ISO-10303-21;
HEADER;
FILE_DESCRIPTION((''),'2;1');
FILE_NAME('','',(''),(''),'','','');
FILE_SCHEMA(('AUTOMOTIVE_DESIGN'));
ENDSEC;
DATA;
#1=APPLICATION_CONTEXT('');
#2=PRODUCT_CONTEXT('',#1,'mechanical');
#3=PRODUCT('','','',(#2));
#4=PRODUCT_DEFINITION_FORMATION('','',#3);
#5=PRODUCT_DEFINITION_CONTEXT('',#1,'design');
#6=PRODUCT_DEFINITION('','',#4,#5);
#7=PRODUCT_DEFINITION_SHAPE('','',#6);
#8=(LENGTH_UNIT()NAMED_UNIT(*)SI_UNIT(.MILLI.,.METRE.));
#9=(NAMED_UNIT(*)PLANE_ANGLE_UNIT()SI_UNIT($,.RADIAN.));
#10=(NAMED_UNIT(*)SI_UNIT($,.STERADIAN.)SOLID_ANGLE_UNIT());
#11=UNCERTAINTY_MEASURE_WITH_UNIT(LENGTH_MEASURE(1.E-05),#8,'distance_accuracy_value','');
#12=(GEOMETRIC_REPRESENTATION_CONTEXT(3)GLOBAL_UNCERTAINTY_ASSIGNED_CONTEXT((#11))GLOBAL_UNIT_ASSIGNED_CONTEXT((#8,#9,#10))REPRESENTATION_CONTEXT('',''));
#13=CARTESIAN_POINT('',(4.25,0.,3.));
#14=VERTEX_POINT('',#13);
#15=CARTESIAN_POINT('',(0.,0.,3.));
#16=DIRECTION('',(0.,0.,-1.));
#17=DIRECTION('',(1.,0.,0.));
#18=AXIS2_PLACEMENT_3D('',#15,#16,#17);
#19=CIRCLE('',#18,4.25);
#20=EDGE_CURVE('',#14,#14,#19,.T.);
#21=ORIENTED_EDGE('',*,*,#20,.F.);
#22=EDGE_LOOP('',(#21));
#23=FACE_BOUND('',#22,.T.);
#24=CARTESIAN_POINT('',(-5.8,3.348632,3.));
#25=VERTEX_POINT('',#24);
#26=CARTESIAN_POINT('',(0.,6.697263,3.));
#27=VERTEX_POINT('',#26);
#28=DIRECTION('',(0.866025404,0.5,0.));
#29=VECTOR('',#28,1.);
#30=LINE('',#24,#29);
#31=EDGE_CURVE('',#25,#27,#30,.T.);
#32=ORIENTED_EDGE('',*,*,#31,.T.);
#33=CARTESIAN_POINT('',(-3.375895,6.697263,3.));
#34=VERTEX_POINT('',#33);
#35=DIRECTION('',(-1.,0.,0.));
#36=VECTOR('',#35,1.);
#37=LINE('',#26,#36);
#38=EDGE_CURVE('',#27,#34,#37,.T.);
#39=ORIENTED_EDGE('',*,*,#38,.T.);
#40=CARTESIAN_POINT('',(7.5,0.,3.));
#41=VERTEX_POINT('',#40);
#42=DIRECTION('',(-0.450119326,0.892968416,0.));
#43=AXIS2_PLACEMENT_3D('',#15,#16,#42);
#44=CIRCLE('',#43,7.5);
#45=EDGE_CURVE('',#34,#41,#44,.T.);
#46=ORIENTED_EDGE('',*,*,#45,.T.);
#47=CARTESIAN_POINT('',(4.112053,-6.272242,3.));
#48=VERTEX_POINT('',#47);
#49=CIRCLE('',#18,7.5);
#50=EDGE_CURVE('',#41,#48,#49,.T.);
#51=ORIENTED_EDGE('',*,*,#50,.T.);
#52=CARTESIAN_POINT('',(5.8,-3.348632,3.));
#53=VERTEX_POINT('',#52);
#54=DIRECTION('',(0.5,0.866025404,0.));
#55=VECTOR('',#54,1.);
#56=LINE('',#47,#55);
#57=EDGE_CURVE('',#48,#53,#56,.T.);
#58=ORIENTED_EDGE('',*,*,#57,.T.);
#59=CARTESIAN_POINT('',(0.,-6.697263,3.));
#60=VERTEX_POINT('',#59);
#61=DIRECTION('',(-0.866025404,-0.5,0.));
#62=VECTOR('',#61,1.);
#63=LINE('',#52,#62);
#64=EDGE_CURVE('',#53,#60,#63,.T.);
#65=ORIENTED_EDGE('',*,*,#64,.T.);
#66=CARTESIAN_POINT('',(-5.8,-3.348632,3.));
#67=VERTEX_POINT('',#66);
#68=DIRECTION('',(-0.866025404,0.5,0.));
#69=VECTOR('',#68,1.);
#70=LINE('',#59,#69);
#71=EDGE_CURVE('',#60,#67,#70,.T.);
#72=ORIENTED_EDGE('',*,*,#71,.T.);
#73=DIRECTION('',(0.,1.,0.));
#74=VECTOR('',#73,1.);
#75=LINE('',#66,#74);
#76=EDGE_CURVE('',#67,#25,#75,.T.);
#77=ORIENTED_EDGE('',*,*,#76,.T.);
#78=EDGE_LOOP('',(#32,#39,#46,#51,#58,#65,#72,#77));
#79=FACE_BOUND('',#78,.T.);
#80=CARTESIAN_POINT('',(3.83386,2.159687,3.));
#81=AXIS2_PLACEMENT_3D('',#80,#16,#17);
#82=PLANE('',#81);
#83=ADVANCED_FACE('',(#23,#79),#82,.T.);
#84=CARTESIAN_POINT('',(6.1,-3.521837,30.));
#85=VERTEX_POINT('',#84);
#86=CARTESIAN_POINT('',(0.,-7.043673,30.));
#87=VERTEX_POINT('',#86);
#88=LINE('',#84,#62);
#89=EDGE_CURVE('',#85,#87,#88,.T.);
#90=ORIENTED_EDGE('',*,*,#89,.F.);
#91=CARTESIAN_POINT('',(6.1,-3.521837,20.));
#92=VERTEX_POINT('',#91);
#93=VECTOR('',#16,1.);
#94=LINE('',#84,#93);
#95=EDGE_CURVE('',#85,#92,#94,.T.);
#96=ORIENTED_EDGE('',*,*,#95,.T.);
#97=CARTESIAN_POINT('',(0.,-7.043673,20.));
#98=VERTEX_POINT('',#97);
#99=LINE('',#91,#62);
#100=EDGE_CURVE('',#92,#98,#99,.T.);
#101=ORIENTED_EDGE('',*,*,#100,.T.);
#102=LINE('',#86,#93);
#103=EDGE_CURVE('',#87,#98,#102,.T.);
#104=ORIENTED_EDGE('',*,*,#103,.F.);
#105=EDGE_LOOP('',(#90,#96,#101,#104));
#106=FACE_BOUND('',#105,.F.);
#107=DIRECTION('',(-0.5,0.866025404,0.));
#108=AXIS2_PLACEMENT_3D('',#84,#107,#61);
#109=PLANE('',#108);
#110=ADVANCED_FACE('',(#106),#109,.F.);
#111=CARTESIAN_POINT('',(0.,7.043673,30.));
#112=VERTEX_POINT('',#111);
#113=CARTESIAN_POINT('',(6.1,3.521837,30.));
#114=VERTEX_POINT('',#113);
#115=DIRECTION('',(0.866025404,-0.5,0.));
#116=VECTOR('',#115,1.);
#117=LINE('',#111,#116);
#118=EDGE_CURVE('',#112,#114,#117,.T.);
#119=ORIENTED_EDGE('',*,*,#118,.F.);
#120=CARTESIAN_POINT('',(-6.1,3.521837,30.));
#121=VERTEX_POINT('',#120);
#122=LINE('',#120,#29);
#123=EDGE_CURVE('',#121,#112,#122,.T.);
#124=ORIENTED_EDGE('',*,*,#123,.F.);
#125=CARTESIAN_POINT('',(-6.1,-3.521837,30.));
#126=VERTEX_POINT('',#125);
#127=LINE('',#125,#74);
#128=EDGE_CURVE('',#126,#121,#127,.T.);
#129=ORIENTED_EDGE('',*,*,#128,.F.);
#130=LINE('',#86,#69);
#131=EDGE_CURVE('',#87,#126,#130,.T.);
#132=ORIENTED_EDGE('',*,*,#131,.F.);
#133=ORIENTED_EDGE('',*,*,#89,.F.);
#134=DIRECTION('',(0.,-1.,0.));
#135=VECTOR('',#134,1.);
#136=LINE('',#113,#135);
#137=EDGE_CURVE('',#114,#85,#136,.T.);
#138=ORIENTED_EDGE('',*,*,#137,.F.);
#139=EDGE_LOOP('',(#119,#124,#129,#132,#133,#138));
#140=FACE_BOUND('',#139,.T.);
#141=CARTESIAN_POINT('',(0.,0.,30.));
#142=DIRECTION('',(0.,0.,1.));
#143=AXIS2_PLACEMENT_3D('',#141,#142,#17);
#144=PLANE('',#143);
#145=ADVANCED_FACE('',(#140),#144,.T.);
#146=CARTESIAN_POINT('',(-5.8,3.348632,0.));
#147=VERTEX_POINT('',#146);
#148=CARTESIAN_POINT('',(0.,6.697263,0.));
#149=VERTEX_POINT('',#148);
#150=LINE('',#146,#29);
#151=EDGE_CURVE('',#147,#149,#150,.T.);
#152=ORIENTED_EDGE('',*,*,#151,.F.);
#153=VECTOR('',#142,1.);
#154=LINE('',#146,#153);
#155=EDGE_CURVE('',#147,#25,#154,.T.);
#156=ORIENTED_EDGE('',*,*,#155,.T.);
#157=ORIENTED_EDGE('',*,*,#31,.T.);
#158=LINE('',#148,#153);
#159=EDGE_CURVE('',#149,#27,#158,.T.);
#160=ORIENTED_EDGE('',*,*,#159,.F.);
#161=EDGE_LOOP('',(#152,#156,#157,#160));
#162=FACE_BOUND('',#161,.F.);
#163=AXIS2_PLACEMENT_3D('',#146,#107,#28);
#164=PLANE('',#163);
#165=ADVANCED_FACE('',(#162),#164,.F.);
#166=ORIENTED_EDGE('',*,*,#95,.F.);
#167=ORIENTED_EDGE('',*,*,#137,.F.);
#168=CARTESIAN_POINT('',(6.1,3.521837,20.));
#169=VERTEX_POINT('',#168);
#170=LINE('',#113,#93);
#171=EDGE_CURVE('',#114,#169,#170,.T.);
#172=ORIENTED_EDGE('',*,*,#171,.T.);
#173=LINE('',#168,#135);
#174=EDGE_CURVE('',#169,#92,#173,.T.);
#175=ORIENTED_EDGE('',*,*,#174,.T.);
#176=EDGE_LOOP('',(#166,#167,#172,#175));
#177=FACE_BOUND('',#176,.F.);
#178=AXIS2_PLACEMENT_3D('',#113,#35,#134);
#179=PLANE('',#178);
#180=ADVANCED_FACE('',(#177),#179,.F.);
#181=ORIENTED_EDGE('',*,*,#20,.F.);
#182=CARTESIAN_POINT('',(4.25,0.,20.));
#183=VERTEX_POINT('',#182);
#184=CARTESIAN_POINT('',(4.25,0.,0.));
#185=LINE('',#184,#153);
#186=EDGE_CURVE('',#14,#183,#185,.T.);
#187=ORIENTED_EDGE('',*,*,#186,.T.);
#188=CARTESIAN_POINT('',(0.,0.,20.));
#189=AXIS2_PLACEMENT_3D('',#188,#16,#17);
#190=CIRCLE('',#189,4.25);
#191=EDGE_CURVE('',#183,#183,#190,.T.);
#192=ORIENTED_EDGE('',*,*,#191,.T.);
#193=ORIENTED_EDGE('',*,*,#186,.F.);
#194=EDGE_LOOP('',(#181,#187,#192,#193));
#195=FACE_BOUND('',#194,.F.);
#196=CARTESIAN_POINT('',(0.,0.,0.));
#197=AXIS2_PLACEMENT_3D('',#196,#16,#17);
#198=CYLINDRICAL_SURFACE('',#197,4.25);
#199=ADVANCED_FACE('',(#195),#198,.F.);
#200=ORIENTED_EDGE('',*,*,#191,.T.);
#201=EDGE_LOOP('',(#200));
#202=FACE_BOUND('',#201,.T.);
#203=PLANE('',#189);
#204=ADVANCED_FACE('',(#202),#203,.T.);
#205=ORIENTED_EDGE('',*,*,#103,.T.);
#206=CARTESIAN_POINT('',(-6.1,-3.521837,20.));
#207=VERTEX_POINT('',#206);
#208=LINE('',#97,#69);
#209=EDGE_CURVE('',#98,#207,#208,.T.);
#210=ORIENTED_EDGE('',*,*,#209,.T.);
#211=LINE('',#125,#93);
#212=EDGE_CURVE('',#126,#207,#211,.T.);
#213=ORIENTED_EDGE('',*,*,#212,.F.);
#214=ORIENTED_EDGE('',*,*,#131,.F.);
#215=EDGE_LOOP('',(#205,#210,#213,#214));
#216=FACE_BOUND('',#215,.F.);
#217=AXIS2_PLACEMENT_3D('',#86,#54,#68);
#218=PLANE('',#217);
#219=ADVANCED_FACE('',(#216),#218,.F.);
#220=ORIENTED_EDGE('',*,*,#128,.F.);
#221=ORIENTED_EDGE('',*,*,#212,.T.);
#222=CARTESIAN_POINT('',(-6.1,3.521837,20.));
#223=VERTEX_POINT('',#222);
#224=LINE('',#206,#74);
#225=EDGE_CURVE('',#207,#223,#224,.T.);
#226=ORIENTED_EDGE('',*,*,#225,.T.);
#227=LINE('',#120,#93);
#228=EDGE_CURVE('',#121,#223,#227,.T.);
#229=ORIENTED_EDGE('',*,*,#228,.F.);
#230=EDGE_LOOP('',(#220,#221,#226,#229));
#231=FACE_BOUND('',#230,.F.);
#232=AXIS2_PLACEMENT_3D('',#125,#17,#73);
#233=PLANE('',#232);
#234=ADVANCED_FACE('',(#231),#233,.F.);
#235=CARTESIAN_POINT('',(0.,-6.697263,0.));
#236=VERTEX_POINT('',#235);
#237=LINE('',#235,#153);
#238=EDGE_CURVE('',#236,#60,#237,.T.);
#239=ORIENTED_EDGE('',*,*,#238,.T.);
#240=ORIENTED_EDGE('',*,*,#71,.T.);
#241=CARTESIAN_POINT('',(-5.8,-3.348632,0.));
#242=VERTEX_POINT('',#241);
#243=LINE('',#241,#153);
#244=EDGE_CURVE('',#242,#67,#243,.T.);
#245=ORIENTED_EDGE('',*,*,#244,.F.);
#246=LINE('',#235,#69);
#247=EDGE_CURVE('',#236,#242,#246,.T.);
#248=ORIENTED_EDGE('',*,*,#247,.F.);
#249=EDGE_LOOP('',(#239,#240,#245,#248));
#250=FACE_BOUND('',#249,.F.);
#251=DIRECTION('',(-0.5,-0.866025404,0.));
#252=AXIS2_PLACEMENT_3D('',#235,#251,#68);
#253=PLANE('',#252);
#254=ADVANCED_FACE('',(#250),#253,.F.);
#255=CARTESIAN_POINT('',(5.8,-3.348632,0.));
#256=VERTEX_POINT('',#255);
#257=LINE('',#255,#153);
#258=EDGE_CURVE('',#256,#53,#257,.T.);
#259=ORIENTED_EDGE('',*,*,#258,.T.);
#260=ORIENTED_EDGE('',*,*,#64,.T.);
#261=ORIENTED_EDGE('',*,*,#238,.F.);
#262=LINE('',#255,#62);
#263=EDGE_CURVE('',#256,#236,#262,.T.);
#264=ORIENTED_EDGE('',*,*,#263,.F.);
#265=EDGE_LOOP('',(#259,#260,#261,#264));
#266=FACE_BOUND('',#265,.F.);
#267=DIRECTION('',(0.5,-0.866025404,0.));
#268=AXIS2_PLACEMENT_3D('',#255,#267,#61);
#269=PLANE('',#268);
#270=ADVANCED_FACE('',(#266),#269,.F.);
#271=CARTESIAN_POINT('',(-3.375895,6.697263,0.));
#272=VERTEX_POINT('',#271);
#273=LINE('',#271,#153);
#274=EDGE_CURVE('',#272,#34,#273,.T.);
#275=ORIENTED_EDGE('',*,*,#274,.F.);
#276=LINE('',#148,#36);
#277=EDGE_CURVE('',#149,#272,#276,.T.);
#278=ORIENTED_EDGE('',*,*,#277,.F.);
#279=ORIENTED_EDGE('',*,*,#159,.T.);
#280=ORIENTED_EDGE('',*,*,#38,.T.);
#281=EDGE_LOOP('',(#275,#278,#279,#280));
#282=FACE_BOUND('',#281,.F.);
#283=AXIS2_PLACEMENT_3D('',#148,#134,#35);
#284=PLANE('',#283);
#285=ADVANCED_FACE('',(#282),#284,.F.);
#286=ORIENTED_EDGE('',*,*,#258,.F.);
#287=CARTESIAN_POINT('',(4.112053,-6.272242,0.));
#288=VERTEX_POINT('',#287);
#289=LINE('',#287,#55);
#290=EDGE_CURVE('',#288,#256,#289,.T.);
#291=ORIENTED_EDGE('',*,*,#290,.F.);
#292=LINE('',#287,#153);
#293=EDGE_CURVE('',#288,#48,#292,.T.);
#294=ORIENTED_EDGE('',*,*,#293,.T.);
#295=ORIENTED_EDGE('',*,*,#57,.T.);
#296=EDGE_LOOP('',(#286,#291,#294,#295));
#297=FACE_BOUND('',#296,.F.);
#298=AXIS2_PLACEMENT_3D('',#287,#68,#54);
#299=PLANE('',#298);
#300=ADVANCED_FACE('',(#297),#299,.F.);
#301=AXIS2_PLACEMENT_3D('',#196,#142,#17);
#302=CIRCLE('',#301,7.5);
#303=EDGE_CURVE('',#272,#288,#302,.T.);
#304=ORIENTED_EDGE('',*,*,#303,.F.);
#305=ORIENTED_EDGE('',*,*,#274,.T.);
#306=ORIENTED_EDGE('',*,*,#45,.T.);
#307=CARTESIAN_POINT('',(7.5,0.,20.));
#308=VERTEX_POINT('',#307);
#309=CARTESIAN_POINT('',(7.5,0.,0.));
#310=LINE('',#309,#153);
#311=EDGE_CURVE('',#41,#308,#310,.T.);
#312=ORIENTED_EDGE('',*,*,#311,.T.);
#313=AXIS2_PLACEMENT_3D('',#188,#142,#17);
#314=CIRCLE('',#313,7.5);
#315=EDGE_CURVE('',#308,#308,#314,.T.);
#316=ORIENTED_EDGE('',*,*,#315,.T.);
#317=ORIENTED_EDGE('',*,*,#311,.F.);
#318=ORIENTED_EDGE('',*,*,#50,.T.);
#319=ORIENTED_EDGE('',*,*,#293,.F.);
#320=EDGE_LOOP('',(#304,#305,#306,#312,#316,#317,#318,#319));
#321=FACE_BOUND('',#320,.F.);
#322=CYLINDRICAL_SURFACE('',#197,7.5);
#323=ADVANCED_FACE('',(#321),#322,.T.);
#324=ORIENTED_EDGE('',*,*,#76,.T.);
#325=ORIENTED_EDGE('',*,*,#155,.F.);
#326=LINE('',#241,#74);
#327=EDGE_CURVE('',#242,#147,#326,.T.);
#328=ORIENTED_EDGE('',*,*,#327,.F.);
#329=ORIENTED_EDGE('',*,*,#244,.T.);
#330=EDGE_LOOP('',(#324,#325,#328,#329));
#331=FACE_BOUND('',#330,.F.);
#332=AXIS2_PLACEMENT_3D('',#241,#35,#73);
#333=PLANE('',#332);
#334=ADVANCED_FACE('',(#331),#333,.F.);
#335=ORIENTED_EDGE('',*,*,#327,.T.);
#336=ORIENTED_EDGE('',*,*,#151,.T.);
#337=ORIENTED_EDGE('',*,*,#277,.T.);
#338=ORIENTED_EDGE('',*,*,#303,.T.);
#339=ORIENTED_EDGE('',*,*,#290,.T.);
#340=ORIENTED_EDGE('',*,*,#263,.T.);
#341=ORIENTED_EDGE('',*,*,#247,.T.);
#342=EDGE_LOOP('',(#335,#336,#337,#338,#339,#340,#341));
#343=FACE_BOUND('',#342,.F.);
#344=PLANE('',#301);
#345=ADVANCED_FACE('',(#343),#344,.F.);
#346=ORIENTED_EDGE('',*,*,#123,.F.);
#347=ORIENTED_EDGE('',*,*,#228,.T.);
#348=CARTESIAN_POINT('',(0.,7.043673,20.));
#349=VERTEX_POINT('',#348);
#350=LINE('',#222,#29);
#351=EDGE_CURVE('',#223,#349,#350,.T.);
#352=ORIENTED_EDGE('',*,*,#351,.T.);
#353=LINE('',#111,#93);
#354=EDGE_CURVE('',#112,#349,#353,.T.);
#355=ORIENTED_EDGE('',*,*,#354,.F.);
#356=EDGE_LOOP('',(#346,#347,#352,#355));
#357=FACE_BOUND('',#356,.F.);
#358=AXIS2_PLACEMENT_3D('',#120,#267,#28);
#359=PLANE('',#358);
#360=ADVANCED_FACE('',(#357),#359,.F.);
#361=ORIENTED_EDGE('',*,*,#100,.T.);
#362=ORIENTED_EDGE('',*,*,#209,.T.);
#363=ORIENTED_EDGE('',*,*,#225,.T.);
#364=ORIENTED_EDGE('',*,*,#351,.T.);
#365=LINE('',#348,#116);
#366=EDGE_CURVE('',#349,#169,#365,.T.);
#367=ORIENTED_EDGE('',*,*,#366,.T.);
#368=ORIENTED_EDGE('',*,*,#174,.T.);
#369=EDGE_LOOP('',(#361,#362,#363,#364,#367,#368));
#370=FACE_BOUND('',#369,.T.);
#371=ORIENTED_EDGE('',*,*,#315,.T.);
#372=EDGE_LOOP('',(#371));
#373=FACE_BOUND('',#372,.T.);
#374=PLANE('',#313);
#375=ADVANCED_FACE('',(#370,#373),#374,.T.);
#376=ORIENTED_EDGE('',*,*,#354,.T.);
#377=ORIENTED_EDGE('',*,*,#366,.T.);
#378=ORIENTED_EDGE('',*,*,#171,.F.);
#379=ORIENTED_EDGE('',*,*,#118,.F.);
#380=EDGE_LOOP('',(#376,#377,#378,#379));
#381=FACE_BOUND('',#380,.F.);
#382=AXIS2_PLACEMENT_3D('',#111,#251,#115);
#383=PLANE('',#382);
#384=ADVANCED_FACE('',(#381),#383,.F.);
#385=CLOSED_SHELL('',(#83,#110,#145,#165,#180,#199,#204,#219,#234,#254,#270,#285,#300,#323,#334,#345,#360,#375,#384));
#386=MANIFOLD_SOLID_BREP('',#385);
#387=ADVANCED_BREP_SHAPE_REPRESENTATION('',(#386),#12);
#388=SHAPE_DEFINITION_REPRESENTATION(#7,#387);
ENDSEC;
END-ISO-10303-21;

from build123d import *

# Parameters (mm, degrees)
F0_R      = 7.5
F1_DEPTH  = 30
F2_R      = 4.25
F3_DEPTH  = 20
F4_R      = 4.25
F5_DEPTH  = 3
F7_R      = 7.5
F8_DEPTH  = 10
F10_DEPTH = 3


# Not quite as in the source:
# - a feature names something its author has since deleted; it is built from what else it names


with BuildPart() as f1:
    # F0 (on Top) → F1 (new body)
    with BuildSketch(Plane.XY):
        Circle(F0_R)
    extrude(amount=F1_DEPTH)

    # F2 (on face) → F3 (cut)
    with BuildSketch(Plane(origin=(0, 0, 0), x_dir=(1, 0, 0), z_dir=(0, 0, -1))):
        Circle(F2_R)
    extrude(amount=-F3_DEPTH, mode=Mode.SUBTRACT)

    # F4 (on face) → F5 (cut)
    with BuildSketch(Plane(origin=(0, 0, 0), x_dir=(1, 0, 0), z_dir=(0, 0, -1))):
        Polygon((5.8, -3.3486315613), (5.8, 3.3486315613), (0, 6.6972631226), (-5.8, 3.3486315613), (-5.8, -3.3486315613), (0, -6.6972631226), align=None)
        Circle(F4_R, mode=Mode.SUBTRACT)
    extrude(amount=-F5_DEPTH, mode=Mode.SUBTRACT)

    # F7 (on face) → F8 (cut)
    with BuildSketch(Plane.XY.offset(30)):
        Circle(F7_R)
        Polygon((0, 7.0436732841), (6.1, 3.5218366421), (6.1, -3.5218366421), (0, -7.0436732841), (-6.1, -3.5218366421), (-6.1, 3.5218366421), align=None, mode=Mode.SUBTRACT)
    extrude(amount=-F8_DEPTH, mode=Mode.SUBTRACT)

    # F9 (on face) → F10 (cut, through all)
    with BuildSketch(Plane(origin=(0, 0, 0), x_dir=(1, 0, 0), z_dir=(0, 0, -1))):
        with BuildLine():
            Line((4.1120525285, 6.2722423425), (5.8, 3.3486315613))
            Line((5.8, 3.3486315613), (5.8, -3.3486315613))
            Line((5.8, -3.3486315613), (0, -6.6972631226))
            Line((0, -6.6972631226), (-3.3758949431, -6.6972631226))
            ThreePointArc((-3.3758949431, -6.6972631226), (3.9326065101, -6.3862826462), (7.5, 0))
            ThreePointArc((7.5, 0), (6.5988784639, 3.5643797523), (4.1120525285, 6.2722423425))
        make_face()
    extrude(amount=-F10_DEPTH, mode=Mode.SUBTRACT)


solid = f1.part
